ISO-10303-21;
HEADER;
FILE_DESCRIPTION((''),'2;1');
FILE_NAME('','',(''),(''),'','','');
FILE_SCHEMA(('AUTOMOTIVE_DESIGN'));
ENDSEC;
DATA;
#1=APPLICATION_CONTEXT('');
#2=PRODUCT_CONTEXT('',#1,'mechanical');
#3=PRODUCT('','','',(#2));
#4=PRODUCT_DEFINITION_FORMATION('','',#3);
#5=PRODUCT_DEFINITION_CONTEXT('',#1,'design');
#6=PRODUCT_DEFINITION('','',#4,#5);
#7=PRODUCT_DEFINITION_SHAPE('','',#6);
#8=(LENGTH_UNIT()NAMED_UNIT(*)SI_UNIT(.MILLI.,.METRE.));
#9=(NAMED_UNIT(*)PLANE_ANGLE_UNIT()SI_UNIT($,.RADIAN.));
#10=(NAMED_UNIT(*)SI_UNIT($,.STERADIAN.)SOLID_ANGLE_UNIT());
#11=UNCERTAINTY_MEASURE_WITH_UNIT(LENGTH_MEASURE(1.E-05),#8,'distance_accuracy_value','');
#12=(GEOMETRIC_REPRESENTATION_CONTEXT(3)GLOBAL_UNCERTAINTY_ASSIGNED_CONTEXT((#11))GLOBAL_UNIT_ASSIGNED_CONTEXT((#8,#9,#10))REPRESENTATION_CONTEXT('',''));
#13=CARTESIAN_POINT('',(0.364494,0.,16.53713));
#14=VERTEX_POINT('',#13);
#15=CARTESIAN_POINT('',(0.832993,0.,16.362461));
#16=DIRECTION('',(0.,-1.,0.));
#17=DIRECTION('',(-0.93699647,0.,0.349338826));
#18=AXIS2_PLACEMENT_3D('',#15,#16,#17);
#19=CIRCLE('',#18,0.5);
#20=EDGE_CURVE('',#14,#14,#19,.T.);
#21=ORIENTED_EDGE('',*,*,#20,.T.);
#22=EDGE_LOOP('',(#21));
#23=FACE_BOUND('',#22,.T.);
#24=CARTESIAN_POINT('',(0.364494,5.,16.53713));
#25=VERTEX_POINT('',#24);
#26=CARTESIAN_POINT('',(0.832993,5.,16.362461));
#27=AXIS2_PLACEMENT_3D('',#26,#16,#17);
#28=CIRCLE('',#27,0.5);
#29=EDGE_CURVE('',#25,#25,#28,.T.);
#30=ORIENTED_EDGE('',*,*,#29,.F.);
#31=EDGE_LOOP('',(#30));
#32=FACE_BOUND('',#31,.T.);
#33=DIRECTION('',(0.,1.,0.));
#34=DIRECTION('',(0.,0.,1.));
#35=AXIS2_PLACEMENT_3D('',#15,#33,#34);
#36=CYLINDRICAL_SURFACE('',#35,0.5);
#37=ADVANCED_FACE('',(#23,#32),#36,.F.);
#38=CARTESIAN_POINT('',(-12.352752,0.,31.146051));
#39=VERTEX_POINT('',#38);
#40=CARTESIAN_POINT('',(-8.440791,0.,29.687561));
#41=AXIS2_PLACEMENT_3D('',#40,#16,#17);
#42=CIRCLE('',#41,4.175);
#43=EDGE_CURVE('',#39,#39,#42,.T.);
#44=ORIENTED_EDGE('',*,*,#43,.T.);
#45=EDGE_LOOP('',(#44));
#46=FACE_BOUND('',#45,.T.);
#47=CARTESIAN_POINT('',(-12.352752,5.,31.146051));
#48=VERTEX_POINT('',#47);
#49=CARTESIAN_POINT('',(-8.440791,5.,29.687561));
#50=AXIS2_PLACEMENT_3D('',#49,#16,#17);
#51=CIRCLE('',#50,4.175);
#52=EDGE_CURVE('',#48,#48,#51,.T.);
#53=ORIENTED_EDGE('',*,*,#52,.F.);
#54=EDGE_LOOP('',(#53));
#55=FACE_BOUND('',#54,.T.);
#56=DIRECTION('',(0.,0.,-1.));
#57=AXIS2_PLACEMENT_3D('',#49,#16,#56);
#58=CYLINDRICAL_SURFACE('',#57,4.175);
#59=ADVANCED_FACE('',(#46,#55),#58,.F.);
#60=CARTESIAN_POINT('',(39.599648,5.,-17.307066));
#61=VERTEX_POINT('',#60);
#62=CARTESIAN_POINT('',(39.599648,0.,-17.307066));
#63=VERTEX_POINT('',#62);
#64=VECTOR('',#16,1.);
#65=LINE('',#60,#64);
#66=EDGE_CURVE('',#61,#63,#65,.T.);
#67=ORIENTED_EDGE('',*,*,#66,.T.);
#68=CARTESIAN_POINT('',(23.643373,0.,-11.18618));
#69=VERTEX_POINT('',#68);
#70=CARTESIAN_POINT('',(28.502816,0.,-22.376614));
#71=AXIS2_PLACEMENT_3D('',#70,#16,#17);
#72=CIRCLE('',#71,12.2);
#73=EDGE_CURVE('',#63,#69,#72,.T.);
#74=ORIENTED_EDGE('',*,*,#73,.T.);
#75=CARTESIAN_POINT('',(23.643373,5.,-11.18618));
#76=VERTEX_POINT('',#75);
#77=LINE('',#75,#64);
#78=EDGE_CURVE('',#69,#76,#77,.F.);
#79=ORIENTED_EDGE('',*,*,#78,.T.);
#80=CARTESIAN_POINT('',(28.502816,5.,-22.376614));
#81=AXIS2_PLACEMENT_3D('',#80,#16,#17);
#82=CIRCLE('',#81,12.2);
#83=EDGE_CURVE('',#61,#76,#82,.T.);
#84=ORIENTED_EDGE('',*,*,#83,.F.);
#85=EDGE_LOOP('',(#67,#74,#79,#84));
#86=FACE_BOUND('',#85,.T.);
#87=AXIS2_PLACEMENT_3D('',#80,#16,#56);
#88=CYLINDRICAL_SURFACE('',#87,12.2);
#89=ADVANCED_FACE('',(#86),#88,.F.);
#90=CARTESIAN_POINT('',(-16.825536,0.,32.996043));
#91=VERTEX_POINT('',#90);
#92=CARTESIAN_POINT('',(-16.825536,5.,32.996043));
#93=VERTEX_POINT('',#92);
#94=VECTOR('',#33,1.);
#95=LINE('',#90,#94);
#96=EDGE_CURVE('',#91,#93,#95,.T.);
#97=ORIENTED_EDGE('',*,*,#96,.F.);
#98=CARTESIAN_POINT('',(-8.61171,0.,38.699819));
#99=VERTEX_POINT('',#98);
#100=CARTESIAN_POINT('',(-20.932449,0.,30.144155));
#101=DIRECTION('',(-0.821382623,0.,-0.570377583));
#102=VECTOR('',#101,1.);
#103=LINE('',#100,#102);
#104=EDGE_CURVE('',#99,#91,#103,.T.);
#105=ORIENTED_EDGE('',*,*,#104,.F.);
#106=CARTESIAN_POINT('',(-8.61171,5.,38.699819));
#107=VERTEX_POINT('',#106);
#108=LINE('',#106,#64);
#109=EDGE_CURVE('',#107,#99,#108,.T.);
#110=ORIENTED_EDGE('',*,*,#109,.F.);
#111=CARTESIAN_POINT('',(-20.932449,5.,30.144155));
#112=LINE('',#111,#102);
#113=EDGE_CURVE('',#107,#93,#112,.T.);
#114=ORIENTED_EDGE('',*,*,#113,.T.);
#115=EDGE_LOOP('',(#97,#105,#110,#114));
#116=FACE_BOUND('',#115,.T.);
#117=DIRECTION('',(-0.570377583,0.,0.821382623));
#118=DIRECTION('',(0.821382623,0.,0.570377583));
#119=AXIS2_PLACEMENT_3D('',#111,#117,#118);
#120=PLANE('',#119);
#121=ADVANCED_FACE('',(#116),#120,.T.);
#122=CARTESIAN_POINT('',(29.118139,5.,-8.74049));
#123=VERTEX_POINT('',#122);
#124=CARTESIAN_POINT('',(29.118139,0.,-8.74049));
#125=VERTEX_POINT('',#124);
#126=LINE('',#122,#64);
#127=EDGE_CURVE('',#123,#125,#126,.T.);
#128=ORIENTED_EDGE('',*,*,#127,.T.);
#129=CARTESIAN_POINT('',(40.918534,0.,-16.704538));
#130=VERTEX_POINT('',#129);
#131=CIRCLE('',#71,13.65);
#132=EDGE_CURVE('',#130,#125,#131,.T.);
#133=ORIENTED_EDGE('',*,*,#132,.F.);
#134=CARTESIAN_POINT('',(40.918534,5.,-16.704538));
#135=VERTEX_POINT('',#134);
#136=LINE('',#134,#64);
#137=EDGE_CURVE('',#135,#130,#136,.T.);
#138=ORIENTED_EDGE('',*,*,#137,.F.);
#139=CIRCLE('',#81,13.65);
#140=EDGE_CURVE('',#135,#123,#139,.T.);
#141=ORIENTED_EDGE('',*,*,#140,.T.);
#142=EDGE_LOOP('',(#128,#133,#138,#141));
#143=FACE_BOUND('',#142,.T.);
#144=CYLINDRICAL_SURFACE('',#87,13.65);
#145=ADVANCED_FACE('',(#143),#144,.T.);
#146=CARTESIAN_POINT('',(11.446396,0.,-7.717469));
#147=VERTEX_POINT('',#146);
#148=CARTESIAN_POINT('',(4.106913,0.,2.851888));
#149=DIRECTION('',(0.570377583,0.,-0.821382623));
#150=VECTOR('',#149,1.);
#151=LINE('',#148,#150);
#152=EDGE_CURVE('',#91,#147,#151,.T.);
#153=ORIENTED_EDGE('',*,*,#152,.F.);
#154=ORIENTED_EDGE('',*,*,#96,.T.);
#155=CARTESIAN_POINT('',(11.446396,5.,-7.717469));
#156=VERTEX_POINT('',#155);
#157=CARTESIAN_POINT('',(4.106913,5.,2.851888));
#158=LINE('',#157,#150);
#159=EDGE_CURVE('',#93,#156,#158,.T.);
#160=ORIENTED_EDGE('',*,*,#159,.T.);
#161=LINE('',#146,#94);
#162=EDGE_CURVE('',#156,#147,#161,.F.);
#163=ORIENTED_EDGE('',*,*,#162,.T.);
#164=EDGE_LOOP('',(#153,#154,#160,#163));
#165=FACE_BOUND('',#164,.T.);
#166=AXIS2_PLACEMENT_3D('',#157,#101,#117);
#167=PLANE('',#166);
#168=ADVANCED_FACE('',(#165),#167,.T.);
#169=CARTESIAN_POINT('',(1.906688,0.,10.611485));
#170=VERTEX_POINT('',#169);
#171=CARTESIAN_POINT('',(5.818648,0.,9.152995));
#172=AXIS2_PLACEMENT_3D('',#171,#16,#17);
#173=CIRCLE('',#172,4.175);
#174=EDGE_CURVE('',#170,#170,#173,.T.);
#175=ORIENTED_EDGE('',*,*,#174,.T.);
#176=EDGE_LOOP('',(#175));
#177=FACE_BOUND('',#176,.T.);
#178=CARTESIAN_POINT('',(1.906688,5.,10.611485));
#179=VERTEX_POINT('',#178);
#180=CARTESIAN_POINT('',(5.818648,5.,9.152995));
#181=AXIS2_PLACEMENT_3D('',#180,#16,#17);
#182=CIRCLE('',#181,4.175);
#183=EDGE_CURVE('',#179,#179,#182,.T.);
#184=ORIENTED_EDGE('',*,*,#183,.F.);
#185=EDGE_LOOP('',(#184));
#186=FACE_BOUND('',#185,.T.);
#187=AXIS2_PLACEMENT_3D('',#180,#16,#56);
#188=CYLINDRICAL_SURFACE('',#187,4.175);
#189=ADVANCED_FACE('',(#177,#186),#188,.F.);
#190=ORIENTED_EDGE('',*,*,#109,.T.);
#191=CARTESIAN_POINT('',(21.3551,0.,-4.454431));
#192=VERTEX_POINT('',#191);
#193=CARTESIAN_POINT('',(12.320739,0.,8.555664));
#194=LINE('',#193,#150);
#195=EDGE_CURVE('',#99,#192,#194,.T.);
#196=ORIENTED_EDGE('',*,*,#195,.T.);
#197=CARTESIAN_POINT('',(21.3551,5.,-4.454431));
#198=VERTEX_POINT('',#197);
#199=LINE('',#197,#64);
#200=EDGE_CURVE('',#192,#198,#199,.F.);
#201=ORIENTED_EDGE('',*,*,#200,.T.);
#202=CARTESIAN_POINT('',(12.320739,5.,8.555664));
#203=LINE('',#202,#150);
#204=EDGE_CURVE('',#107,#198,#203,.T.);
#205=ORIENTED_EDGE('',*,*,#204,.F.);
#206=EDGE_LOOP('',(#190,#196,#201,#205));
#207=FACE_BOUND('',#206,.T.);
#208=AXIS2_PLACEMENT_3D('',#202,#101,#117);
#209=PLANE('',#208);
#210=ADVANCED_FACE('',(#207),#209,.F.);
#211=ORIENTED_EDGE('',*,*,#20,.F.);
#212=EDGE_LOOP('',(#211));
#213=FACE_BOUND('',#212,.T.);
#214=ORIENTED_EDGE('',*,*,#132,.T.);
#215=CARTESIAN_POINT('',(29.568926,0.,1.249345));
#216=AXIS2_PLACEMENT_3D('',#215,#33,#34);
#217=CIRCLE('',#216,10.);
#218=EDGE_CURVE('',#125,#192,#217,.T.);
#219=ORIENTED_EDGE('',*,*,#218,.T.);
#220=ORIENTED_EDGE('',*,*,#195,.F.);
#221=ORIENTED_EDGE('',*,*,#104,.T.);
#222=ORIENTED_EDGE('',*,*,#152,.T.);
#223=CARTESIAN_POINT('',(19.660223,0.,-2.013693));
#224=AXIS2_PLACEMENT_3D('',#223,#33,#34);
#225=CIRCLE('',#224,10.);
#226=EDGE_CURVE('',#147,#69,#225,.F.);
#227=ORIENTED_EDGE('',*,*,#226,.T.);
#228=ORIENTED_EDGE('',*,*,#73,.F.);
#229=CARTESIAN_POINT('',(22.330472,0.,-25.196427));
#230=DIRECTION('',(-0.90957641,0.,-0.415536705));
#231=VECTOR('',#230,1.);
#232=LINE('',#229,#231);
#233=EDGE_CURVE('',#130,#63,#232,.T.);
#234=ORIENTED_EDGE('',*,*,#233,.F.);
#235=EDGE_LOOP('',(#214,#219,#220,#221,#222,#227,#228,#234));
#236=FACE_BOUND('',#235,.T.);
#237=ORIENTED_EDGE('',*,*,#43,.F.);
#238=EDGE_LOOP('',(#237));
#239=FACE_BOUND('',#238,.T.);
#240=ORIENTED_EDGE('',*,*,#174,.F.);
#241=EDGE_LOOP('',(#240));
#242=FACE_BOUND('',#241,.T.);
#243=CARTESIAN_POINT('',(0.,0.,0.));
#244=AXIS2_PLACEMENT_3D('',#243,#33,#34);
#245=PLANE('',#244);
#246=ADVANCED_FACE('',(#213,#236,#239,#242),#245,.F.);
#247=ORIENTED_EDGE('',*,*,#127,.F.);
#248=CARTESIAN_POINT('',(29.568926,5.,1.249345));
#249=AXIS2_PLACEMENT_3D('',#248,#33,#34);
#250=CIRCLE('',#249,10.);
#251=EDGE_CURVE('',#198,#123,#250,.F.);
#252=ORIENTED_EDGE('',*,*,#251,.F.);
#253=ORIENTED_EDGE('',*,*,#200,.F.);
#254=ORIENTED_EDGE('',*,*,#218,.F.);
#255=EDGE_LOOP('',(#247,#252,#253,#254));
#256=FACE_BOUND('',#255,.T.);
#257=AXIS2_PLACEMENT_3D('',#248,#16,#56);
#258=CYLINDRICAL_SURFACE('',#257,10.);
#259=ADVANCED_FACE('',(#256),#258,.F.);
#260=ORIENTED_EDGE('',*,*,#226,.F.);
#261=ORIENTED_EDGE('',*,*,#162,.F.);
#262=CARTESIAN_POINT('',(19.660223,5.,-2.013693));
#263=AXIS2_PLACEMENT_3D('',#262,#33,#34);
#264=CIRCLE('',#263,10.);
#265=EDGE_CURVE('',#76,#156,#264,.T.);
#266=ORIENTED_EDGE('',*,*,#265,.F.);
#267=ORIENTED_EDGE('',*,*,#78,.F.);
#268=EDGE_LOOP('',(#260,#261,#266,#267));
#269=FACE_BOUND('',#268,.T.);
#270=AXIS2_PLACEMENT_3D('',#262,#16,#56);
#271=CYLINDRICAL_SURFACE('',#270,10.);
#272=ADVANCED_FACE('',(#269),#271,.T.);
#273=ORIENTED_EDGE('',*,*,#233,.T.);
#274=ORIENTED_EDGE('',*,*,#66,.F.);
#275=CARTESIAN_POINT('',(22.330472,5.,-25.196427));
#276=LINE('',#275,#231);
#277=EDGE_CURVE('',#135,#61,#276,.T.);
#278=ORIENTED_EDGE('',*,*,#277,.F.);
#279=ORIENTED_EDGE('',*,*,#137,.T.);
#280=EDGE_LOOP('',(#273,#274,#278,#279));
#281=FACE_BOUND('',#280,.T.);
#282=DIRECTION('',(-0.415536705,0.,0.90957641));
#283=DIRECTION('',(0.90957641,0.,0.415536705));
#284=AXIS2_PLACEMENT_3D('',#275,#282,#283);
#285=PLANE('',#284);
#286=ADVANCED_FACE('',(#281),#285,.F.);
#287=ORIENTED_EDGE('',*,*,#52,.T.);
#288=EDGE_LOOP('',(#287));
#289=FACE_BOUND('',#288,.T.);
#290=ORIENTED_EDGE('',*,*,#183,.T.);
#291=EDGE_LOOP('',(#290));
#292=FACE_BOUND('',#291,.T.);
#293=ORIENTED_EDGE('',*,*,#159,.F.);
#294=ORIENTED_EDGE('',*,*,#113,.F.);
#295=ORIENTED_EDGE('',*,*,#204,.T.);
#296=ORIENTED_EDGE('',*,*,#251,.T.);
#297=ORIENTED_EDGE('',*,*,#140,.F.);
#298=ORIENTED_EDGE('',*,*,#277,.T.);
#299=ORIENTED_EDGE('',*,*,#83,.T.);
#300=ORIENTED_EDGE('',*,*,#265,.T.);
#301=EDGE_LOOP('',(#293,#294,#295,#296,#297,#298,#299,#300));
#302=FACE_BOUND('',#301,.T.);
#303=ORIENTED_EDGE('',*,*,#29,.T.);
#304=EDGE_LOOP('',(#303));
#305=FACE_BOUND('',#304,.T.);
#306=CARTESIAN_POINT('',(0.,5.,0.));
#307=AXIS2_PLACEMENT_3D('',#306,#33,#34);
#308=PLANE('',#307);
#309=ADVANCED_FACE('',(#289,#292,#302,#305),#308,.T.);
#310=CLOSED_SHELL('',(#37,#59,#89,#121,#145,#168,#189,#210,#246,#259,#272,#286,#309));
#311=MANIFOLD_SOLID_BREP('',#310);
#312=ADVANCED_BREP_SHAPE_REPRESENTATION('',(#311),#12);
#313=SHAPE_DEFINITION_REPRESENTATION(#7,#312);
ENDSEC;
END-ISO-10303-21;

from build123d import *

# Parameters (mm, degrees)
SKETCH_2_R          = 4.175
EXTRUDE_1_DEPTH     = 5
FILLET_1_R          = 20
SKETCH_6_R          = 0.5000000000000009
CUT_EXTRUDE_3_DEPTH = 47.17452492507412
FILLET_2_R          = 10
CUT_EXTRUDE_4_DEPTH = 57.542041070345505
FILLET_3_R          = 10


with BuildPart() as part:
    # ｽｹｯﾁ2 → ﾎﾞｽ - 押し出し1 (new body)
    with BuildSketch(Plane(origin=(0, 0, 0), x_dir=(1, 0, 0), z_dir=(0, 1, 0))):
        with BuildLine():
            Line((8.269872578160966, 20.67530348178248), (-25.039362549658698, -27.29226699202151))
            Line((-25.039362549658694, -27.292266992021514), (-16.82553632293364, -32.996042821869985))
            Line((-16.82553632293364, -32.996042821869985), (16.77540554807104, 15.391605258271007))
            ThreePointArc((16.775405548070047, 15.39160525826554), (17.036467269075846, 15.346625845237856), (17.298352710232226, 15.306721140237647))
            Line((17.29835271023301, 15.306721140243175), (12.453720459223167, 18.670889747549086))
            ThreePointArc((12.453720459220065, 18.67088974754445), (7.082723548852389, 27.619577165201054), (10.596791286456618, 37.44698487250789))
            Line((10.596791286456803, 37.44698487250808), (9.571486453740173, 38.47228970522472))
            ThreePointArc((9.571486453736274, 38.47228970522862), (5.609855036074267, 29.81593956245965), (8.269872578156503, 20.675303481779164))
        make_face()
        with Locations(Location((-2.3951779892886145, -3.4492196700893225, 0), (0, 0, 270))):
            Circle(SKETCH_2_R, mode=Mode.SUBTRACT)
        with Locations(Location((-16.654617563909806, -23.98378523690196, 0), (0, 0, 270))):
            Circle(SKETCH_2_R, mode=Mode.SUBTRACT)
    extrude_1 = extrude(amount=EXTRUDE_1_DEPTH)

    # ﾌｨﾚｯﾄ1
    # the kernel refuses this fillet: 20 mm, written as the material it adds along each edge
    with BuildSketch(Plane(origin=(16.775405548070545, 0, -15.391605258268275), x_dir=(-0.5703775829850781, 0, 0.8213826226723454), z_dir=(0, 1, 0))) as fillet_1_piece_1_section:
        with BuildLine():
            CenterArc((4.1176832280817175, 20.000000000000004), FILLET_1_R, 257.44880249712094, 12.55119750289515)
            Line((-0.22855499889395509, 0.4779557096502993), (-0.31547976343346945, 0.08751482384330647))
            ThreePointArc((-0.31547976343346945, 0.08751482384330647), (-0.47282168846060246, 0.06752459028858156), (-0.36414407682378114, -0.16552670876373804))
            Line((-0.36414407682378114, -0.16552670876373804), (1.117e-13, -0.3999999999999987))
            Line((1.117e-13, -0.3999999999999987), (4.117683228087442, -0.39999999999999974))
            Line((4.117683228087442, -0.39999999999999974), (4.117683228087329, 1.7e-16))
        make_face()
    fillet_1_piece_1 = extrude(amount=5, mode=Mode.PRIVATE)
    fillet_1_piece_1 = split(fillet_1_piece_1, bisect_by=Plane(origin=(16.82290798810791, 2.5, -15.63687544831251), z_dir=(-0.570377582984848, 0, 0.8213826226725052)), keep=Keep.TOP, mode=Mode.PRIVATE)
    add(fillet_1_piece_1)
    with BuildSketch(Plane(origin=(8.269872578158733, 0, -20.675303481780823), x_dir=(-0.5703775829847766, 0, 0.8213826226725548), z_dir=(0, 1, 0))) as fillet_1_piece_2:
        with BuildLine():
            CenterArc((10.285673470537454, -20.000000000000007), FILLET_1_R, 89.99999999999505, 43.641913313262535)
            Line((-3.5173087138816013, -5.526656128709918), (-3.7933683575699813, -5.237189251284115))
            ThreePointArc((-3.7933683575699813, -5.237189251284115), (-1.7596460761489088, -2.7626969082759216), (-0.3791309613113661, 0.1275135842768152))
            Line((-0.3791309613113661, 0.1275135842768152), (3.413e-14, 0.40000000000000013))
            Line((3.413e-14, 0.40000000000000013), (10.285673470539217, 0.4000000000000006))
            Line((10.285673470539217, 0.4000000000000006), (10.285673470539184, -6e-17))
        make_face()
    extrude(amount=5)

    # ｽｹｯﾁ6 → ｶｯﾄ - 押し出し3 (cut, through all)
    with BuildSketch(Plane(origin=(0, 5, 0), x_dir=(1, 0, 0), z_dir=(0, 1, 0))):
        with Locations(Location((-7.408738509451215, -10.639307664730705, 0), (0, 0, 270))):
            Circle(SKETCH_6_R)
    cut_extrude_3 = extrude(amount=-CUT_EXTRUDE_3_DEPTH, mode=Mode.SUBTRACT)

    # ﾌｨﾚｯﾄ2
    fillet_2_edges = [part.edges().sort_by_distance(p)[0] for p in [
        (17.29835271023262, 2.5, -15.30672114024041),
    ]]
    fillet(fillet_2_edges, radius=FILLET_2_R)

    # ﾐﾗｰ1: ﾎﾞｽ - 押し出し1, ｶｯﾄ - 押し出し3 across plane
    add(extrude_1.mirror(Plane(origin=(4.106913113362459, 5, 2.8518879149242107), x_dir=(-0.5703775829848504, 0, 0.8213826226725034), z_dir=(-0.8213826226725035, 0, -0.5703775829848503))))
    add(cut_extrude_3.mirror(Plane(origin=(4.106913113362459, 5, 2.8518879149242107), x_dir=(-0.5703775829848504, 0, 0.8213826226725034), z_dir=(-0.8213826226725035, 0, -0.5703775829848503))), mode=Mode.SUBTRACT)

    # ｽｹｯﾁ7 → ｶｯﾄ - 押し出し4 (cut, through all)
    with BuildSketch(Plane(origin=(0, 5, 0), x_dir=(1, 0, 0), z_dir=(0, 1, 0))):
        Polygon((-16.825536322933814, -32.99604282186991), (31.619002207822653, 36.767396870690376), (6.63537695599359, 54.116314892564866), (-41.809161574762875, -15.647124799995419), align=None)
    extrude(amount=-CUT_EXTRUDE_4_DEPTH, mode=Mode.SUBTRACT)

    # ﾌｨﾚｯﾄ3
    fillet_3_edges = [part.edges().sort_by_distance(p)[0] for p in [
        (24.69752503161028, 2.5, -9.267751822082793),
        (16.905768195919187, 2.5, -15.579336362687311),
        (21.357815932613555, 2.5, -12.487782977823219),
    ]]
    fillet(fillet_3_edges, radius=FILLET_3_R)


solid = part.part
